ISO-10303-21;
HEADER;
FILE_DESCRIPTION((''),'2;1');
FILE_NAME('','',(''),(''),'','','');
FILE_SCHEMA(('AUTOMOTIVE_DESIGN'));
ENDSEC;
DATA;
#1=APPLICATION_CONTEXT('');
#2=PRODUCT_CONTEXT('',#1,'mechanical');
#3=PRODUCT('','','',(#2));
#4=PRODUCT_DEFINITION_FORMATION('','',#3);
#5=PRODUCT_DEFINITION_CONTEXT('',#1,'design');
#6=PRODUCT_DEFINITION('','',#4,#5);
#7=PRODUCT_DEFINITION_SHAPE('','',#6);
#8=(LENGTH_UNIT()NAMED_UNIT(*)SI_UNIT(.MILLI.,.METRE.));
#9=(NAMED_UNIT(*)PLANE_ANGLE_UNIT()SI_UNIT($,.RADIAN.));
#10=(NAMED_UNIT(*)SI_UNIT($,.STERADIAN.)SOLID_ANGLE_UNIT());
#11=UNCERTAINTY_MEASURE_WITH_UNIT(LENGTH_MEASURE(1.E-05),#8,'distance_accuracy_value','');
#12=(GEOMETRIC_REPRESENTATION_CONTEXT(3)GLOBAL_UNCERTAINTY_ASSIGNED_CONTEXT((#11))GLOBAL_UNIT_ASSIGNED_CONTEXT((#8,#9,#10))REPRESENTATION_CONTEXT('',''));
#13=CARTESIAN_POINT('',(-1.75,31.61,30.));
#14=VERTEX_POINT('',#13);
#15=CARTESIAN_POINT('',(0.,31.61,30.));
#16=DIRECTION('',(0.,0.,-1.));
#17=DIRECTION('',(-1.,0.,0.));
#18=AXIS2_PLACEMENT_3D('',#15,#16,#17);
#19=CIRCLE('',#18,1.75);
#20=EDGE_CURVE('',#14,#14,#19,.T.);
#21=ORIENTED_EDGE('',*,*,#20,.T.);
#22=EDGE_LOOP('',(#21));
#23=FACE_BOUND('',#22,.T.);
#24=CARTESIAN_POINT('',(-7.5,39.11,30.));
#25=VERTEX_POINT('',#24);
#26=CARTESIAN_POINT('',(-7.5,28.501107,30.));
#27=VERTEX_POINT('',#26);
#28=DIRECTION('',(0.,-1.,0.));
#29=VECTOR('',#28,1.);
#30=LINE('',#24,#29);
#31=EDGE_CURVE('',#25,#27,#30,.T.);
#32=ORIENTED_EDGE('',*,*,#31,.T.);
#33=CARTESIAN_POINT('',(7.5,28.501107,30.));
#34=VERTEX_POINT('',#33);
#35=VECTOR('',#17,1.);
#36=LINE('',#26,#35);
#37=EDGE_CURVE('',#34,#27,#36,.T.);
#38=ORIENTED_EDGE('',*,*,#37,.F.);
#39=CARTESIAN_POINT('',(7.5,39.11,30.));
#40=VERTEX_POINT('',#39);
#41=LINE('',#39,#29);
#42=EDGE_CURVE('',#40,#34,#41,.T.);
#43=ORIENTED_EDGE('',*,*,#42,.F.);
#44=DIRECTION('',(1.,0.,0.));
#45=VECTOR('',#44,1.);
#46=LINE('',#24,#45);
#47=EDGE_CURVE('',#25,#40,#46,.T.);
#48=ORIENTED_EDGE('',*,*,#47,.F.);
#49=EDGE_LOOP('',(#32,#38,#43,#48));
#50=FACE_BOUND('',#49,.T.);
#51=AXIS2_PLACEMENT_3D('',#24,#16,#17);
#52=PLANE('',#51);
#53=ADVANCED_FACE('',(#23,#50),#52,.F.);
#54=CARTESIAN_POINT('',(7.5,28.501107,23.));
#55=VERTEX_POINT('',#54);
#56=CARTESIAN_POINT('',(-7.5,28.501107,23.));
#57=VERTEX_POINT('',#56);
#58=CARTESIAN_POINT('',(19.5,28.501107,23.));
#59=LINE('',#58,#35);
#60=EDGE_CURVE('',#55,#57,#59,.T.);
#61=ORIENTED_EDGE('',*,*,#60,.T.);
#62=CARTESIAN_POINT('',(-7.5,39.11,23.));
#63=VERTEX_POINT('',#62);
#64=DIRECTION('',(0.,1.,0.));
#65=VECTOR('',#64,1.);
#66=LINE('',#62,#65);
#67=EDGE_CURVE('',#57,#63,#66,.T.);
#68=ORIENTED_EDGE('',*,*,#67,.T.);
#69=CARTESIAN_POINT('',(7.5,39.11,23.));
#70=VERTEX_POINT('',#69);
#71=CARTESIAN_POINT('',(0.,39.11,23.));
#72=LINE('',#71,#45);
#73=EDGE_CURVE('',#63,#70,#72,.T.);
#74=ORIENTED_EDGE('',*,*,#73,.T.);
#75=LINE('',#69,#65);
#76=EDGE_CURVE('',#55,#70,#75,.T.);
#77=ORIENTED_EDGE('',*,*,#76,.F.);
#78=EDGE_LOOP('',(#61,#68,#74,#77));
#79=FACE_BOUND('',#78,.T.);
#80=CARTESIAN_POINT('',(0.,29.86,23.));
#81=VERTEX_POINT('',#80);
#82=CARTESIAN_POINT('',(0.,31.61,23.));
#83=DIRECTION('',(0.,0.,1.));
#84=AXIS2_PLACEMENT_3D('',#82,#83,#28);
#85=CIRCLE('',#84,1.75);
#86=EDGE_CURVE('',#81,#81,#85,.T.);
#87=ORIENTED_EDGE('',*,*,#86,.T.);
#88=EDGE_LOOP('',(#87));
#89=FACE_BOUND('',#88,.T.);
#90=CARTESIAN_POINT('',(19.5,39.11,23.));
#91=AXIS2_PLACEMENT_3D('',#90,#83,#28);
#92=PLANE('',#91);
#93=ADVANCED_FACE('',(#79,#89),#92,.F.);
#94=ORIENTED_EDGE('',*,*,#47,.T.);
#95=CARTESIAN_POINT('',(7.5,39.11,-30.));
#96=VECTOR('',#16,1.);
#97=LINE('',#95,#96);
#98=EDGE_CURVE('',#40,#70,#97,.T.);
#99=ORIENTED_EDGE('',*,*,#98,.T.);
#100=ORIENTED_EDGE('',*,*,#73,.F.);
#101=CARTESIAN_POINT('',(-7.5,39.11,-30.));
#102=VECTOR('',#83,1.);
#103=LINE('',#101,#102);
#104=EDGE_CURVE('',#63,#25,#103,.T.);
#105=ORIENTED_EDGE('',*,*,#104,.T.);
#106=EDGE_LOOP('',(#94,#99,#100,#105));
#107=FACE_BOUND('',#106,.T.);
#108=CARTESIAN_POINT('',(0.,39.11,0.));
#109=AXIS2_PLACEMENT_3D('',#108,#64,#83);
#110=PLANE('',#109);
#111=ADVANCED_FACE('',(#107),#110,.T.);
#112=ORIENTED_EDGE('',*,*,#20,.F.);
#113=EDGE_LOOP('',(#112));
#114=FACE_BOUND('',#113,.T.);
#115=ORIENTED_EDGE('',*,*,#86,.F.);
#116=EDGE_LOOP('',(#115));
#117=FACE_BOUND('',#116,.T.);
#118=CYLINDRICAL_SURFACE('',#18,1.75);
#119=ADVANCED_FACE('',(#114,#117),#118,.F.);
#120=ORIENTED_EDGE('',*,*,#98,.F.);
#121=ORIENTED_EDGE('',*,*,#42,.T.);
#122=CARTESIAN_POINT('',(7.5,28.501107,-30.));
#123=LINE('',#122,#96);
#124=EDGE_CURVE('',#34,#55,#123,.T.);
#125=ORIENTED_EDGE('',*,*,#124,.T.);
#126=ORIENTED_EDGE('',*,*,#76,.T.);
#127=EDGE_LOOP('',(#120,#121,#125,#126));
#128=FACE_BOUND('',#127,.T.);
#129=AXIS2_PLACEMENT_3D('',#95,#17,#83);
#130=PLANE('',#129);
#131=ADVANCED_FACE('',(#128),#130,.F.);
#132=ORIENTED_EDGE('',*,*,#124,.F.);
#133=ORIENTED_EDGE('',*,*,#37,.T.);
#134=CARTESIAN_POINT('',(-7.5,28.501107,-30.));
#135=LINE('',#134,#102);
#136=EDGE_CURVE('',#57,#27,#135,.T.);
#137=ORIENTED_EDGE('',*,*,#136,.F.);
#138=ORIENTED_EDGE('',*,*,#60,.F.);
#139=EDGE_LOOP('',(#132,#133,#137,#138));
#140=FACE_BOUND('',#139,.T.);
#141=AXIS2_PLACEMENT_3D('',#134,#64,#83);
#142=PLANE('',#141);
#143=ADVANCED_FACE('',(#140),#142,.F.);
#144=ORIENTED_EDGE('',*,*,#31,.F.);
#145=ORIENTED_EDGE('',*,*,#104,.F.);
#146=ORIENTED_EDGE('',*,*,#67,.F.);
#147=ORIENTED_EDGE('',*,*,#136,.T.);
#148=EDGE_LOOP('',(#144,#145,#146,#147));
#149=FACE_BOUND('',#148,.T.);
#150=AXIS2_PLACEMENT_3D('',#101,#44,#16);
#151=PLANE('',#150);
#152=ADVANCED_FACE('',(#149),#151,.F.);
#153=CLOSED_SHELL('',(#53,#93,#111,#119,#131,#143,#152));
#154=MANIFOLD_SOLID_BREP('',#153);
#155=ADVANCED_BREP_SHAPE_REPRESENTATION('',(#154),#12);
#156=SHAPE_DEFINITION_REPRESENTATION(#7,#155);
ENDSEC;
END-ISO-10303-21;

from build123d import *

# Parameters (mm, degrees)
SKETCH1_W                = 15
SKETCH1_H                = 60
BOSS_EXTRUDE2_DEPTH      = 39.11
BOSS_EXTRUDE3_DEPTH      = 12
BOSS_EXTRUDE3_DEPTH_BACK = 27
SKETCH3_W                = 60
SKETCH3_H                = 5
RIB1_REACH               = 55.008
SKETCH5_WALL_W           = 127.334599132
SKETCH5_WALL_H           = 10
SKETCH6_R                = 1.5
CUT_EXTRUDE2_DEPTH       = 50.434219929
SKETCH7_W                = 16
SKETCH7_H                = 16
CUT_EXTRUDE3_DEPTH       = 57.201353187
SKETCH8_R                = 1.75
CUT_EXTRUDE4_DEPTH       = 75.228310637
FILLET1_R                = 3
CUT_EXTRUDE5_DEPTH       = 75.228310637
SKETCH11_W               = 15
SKETCH11_H               = 10.608893068
CUT_EXTRUDE6_DEPTH       = 67.293605272


with BuildPart() as part:
    # Sketch1 → Boss-Extrude2 (new body)
    with BuildSketch(Plane(origin=(0, 0, 0), x_dir=(1, 0, 0), z_dir=(0, 1, 0))):
        Rectangle(SKETCH1_W, SKETCH1_H)
    extrude(amount=BOSS_EXTRUDE2_DEPTH)

    # Sketch3 → Boss-Extrude3 (add, two sides: drawn at the far end of the back side and taken through both)
    with BuildSketch(Plane.ZY.offset(7.5).offset(-BOSS_EXTRUDE3_DEPTH_BACK)):
        with Locations((0, 2.5)):
            Rectangle(SKETCH3_W, SKETCH3_H)
    extrude(amount=BOSS_EXTRUDE3_DEPTH + BOSS_EXTRUDE3_DEPTH_BACK)

    # Sketch5 wall → Rib1 (add, up to next)
    with BuildSketch(Plane(origin=(-12.037058369, 13.5275, 0), x_dir=(-0.46970610176, -0.882822846311, 0), z_dir=(0.882822846311, -0.46970610176, 0)), mode=Mode.PRIVATE) as rib1_sk1:
        Rectangle(SKETCH5_WALL_W, SKETCH5_WALL_H)
    rib1_tool1 = extrude(rib1_sk1.sketch, amount=RIB1_REACH, mode=Mode.PRIVATE) - part.part
    rib1 = rib1_tool1.solids().sort_by_distance((-12.037058369, 13.5275, 0))[0]
    add(rib1)

    # Sketch6 → Cut-Extrude2 (cut, through all)
    with BuildSketch(Plane(origin=(0, 5, 0), x_dir=(1, 0, 0), z_dir=(0, 1, 0))):
        with Locations((-14.5, -25)):
            Circle(SKETCH6_R)
        with Locations((-14.5, 25)):
            Circle(SKETCH6_R)
    cut_extrude2 = extrude(amount=-CUT_EXTRUDE2_DEPTH, mode=Mode.SUBTRACT)

    # Mirror1: Rib1, Cut-Extrude2 across plane
    add(rib1.mirror(Plane(origin=(0, 0, 0), x_dir=(0, 0, 1), z_dir=(1, 0, 0))))
    add(cut_extrude2.mirror(Plane(origin=(0, 0, 0), x_dir=(0, 0, 1), z_dir=(1, 0, 0))), mode=Mode.SUBTRACT)

    # Sketch7 → Cut-Extrude3 (cut, through all)
    with BuildSketch(Plane.ZY.offset(7.5)):
        with Locations((15, 31.11)):
            Rectangle(SKETCH7_W, SKETCH7_H)
    cut_extrude3 = extrude(amount=-CUT_EXTRUDE3_DEPTH, mode=Mode.SUBTRACT)

    # Mirror2: Cut-Extrude3 across plane
    add(cut_extrude3.mirror(Plane.XY), mode=Mode.SUBTRACT)

    # Sketch8 → Cut-Extrude4 (cut, through all)
    with BuildSketch(Plane(origin=(0, 0, -30), x_dir=(-1, 0, 0), z_dir=(0, 0, -1))):
        with Locations((0, 31.61)):
            Circle(SKETCH8_R)
    extrude(amount=-CUT_EXTRUDE4_DEPTH, mode=Mode.SUBTRACT)

    # Fillet1
    fillet1_edges = [part.edges().sort_by_distance(p)[0] for p in [
        (-16.574116738, 5, 0),
        (-7.5, 5, -17.5),
        (-7.5, 5, 17.5),
        (16.574116738, 5, 0),
        (7.5, 5, 17.5),
        (7.5, 5, -17.5),
    ]]
    fillet(fillet1_edges, radius=FILLET1_R)
    fillet1_2_edges = [part.edges().sort_by_distance(p)[0] for p in [
        (19.5, 2.5, -30),
        (19.5, 2.5, 30),
        (-19.5, 2.5, 30),
        (-19.5, 2.5, -30),
    ]]
    fillet(fillet1_2_edges, radius=FILLET1_R)

    # Sketch10 → Cut-Extrude5 (cut, through all)
    with BuildSketch(Plane.XY.offset(30)):
        Polygon((7.5, 28.501106932), (-7.5, 28.501106932), (-22.220470771, 28.501106932), (-22.220470771, 0), (19.5, 0), (19.5, 28.501106932), align=None)
    extrude(amount=-CUT_EXTRUDE5_DEPTH, mode=Mode.SUBTRACT)


with BuildPart() as cut_extrude5_piece_1:
    # of the separate pieces the step leaves, piece 1, a body of its own (cut_extrude5_pieces)
    add(part.part.solids().sort_by_distance((7.5, 39.11, 7))[0])


with BuildPart() as cut_extrude5_piece_2:
    # of the separate pieces the step leaves, piece 2, a body of its own (cut_extrude5_pieces)
    add(part.part.solids().sort_by_distance((7.5, 28.501106932, 30))[0])


with BuildPart() as cut_extrude5_piece_3:
    # of the separate pieces the step leaves, piece 3, a body of its own (cut_extrude5_pieces)
    add(part.part.solids().sort_by_distance((-7.5, 28.501106932, -30))[0])


with BuildPart() as cut_extrude6_tool:
    # Sketch11 → Cut-Extrude6 (new, through all)
    with BuildSketch(Plane(origin=(0, 0, 23), x_dir=(-1, 0, 0), z_dir=(0, 0, -1))):
        with Locations((0, 33.805553466)):
            Rectangle(SKETCH11_W, SKETCH11_H)
    extrude(amount=CUT_EXTRUDE6_DEPTH)


with BuildPart() as cut_extrude5_piece_1_1:
    add(cut_extrude5_piece_1.part)

    # Cut-Extrude6: cut by cut_extrude6_tool
    add(cut_extrude6_tool.part, mode=Mode.SUBTRACT)


with BuildPart() as cut_extrude5_piece_3_1:
    add(cut_extrude5_piece_3.part)

    # Cut-Extrude6: cut by cut_extrude6_tool
    add(cut_extrude6_tool.part, mode=Mode.SUBTRACT)


solid = cut_extrude5_piece_2.part
